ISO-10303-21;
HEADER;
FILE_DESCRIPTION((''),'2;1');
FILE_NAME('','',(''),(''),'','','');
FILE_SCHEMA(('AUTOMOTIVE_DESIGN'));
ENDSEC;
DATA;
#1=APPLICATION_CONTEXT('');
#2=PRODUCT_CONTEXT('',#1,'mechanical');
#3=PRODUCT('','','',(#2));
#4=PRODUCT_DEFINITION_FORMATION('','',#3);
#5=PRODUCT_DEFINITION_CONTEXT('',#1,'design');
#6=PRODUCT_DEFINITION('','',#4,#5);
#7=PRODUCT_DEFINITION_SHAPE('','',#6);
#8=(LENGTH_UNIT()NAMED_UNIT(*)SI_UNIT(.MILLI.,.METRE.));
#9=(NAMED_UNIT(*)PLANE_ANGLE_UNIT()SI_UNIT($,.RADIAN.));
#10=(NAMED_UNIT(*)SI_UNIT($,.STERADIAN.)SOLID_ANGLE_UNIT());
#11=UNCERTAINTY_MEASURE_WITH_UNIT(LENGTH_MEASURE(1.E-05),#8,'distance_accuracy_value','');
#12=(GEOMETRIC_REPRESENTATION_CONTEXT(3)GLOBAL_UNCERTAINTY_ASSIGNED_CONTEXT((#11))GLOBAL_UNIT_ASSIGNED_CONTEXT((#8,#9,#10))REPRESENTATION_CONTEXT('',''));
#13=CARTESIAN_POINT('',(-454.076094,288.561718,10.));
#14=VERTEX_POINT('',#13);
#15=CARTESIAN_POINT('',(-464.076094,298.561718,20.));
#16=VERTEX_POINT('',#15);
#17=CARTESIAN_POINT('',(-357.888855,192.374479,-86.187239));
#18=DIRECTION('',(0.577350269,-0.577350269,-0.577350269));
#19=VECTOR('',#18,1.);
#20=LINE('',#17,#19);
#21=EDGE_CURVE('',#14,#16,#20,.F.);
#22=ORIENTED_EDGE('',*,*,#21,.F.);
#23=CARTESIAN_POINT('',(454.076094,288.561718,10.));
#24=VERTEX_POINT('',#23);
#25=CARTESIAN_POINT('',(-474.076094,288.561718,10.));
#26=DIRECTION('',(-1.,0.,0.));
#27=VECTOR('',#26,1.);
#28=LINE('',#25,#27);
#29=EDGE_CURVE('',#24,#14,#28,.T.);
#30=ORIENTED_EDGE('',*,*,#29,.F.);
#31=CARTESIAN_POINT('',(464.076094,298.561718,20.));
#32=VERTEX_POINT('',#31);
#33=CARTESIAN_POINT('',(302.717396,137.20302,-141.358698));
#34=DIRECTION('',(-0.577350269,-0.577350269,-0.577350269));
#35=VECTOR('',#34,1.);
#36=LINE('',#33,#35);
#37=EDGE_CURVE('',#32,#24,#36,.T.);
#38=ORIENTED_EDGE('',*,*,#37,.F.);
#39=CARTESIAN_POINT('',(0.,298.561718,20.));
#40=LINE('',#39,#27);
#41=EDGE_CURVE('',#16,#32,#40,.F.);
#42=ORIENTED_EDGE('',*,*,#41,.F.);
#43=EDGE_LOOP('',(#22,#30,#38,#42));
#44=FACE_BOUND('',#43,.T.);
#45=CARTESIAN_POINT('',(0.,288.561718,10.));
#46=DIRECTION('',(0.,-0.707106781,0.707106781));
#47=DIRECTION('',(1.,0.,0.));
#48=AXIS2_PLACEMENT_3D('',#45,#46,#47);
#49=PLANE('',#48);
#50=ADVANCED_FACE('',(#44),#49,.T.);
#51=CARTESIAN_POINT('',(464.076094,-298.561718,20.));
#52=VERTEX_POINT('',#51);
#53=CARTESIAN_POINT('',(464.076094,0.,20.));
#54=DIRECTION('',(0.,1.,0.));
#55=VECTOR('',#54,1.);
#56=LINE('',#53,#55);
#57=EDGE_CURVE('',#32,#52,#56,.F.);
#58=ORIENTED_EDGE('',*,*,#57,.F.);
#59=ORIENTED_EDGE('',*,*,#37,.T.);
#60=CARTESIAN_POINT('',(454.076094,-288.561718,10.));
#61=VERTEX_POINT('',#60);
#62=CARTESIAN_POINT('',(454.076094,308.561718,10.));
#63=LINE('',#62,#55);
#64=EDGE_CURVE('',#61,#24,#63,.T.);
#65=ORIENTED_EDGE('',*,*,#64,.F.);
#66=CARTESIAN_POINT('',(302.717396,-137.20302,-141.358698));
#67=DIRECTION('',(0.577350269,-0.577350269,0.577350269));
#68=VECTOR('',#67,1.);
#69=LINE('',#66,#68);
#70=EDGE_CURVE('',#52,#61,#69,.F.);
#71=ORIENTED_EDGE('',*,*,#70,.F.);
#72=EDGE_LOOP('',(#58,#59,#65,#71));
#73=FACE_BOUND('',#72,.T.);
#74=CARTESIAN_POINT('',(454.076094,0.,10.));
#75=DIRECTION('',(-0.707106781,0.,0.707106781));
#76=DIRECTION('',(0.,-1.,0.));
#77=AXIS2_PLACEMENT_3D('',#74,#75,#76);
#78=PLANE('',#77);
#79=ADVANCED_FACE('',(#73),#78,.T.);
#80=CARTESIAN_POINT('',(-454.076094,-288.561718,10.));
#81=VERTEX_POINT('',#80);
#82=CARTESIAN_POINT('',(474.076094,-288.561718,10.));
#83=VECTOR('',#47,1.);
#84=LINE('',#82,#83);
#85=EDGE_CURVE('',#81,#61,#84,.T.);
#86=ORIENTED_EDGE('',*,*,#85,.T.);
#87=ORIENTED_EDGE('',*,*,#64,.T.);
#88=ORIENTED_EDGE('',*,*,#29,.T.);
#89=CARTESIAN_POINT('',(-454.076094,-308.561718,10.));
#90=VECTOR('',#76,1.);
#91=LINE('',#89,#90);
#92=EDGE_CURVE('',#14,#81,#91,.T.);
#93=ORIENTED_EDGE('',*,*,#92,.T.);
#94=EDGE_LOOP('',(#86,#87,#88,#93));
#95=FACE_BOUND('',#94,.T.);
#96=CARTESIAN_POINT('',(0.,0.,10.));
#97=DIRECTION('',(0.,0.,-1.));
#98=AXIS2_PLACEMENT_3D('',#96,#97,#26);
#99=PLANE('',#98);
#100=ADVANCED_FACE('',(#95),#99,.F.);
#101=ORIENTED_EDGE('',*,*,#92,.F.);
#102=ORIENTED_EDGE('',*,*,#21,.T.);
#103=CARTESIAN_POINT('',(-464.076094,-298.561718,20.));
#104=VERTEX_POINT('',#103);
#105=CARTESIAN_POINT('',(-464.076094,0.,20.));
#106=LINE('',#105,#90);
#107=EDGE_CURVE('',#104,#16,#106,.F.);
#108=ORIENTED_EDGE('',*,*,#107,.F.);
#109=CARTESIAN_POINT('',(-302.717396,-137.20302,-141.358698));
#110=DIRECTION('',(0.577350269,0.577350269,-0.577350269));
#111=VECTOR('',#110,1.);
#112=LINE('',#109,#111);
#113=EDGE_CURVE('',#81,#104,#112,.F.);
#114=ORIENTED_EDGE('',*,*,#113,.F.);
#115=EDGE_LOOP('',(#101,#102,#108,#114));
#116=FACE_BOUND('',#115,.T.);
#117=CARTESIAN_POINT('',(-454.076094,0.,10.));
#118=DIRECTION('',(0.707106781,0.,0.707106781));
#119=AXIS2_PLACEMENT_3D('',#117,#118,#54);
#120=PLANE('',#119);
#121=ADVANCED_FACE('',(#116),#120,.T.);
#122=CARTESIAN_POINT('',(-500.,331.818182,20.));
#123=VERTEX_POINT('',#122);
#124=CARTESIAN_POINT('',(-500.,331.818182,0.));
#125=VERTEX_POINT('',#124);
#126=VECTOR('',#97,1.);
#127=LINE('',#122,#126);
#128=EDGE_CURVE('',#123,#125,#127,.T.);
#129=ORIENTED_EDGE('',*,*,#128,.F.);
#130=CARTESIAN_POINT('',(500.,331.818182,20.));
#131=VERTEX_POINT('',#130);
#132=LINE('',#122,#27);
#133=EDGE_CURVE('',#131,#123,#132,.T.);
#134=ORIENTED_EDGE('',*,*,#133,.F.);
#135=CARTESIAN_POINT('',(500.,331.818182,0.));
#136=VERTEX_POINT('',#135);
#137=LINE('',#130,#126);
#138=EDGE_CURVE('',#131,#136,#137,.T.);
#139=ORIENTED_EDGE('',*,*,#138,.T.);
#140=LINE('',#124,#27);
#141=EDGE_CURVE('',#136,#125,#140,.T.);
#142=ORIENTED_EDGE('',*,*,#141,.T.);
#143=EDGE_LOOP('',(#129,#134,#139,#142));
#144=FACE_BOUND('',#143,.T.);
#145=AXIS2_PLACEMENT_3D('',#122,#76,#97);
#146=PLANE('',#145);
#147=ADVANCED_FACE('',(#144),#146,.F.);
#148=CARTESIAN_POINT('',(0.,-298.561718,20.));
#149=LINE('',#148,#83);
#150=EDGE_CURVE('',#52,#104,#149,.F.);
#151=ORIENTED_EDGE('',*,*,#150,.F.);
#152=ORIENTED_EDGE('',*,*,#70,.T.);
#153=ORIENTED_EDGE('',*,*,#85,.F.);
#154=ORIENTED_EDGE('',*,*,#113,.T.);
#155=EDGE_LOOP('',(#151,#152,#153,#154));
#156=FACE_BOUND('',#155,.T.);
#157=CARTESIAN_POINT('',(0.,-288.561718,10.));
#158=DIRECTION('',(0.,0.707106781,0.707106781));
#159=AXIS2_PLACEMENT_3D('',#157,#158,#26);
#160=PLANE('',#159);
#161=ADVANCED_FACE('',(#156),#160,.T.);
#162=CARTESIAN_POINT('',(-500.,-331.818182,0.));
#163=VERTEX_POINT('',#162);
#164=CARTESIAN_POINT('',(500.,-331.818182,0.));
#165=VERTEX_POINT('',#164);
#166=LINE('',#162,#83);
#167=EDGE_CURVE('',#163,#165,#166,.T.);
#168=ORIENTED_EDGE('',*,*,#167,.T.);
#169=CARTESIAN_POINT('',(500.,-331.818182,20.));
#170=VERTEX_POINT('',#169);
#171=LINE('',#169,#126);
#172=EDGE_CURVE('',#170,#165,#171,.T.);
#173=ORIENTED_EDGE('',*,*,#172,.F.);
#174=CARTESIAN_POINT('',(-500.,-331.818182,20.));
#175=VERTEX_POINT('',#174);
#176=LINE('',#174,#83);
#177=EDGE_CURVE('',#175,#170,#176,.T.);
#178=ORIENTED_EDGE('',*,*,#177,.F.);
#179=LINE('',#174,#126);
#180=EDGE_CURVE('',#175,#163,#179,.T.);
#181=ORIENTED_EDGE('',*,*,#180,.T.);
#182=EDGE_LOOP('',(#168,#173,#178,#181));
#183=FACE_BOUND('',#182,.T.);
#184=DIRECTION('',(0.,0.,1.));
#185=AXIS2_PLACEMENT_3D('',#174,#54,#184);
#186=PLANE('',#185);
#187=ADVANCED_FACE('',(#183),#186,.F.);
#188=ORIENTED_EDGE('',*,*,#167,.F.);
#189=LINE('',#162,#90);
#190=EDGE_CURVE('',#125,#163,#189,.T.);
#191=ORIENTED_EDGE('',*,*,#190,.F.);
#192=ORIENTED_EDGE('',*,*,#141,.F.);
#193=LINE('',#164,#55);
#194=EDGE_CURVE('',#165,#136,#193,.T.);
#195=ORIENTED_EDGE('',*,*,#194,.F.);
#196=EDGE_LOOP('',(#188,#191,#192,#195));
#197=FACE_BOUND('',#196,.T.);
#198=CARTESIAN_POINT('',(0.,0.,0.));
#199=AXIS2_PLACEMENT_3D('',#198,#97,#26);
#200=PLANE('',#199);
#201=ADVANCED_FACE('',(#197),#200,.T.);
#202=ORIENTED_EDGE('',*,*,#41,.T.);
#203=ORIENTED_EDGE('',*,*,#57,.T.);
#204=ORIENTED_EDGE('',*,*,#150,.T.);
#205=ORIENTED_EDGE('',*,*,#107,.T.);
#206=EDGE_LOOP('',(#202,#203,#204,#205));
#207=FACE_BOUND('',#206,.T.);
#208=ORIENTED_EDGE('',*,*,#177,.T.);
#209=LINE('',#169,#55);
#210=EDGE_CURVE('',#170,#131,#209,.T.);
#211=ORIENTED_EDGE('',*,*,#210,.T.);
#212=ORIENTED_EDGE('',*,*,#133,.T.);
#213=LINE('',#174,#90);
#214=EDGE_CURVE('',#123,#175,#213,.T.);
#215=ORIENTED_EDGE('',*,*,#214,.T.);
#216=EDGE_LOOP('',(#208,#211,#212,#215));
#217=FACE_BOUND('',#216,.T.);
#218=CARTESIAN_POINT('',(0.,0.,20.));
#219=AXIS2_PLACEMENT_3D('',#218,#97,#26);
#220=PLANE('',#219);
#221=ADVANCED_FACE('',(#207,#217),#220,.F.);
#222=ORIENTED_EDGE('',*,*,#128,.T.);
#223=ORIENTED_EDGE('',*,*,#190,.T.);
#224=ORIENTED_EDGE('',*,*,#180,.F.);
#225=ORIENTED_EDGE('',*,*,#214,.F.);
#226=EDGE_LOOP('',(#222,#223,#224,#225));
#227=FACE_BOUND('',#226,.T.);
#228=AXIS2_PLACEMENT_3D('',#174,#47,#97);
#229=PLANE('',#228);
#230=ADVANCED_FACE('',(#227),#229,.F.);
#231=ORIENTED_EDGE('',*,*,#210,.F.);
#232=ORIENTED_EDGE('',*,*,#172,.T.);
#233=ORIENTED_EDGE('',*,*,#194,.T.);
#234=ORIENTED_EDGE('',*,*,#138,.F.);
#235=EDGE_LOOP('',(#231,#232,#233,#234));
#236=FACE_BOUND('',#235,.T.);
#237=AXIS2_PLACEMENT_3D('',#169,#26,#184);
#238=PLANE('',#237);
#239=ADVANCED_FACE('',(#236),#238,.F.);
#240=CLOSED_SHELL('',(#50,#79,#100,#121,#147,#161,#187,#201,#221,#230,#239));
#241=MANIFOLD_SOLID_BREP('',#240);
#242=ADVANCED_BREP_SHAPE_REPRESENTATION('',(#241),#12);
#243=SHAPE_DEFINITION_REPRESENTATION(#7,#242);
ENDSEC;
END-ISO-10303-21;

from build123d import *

# Parameters (mm, degrees)
SKETCH2_W           = 1000
SKETCH2_H           = 663.636363636
BOSS_EXTRUDE1_DEPTH = 20
SKETCH3_W           = 948.152188742
SKETCH3_H           = 617.123435666
CUT_EXTRUDE1_DEPTH  = 10
CHAMFER1_SIZE       = 20


with BuildPart() as part:
    # Sketch2 → Boss-Extrude1 (new body)
    with BuildSketch(Plane.XY):
        Rectangle(SKETCH2_W, SKETCH2_H)
    extrude(amount=BOSS_EXTRUDE1_DEPTH)

    # Sketch3 → Cut-Extrude1 (cut)
    with BuildSketch(Plane.XY.offset(20)):
        Rectangle(SKETCH3_W, SKETCH3_H)
    extrude(amount=-CUT_EXTRUDE1_DEPTH, mode=Mode.SUBTRACT)

    # Chamfer1
    # the kernel refuses this chamfer: 20 mm, written as the material it adds along each edge
    with BuildSketch(Plane(origin=(-474.076094371, -308.561717833, 10), x_dir=(0, -0.0274958766105877, 0.9996219169112968), z_dir=(1, 0, 0))) as chamfer1_piece_1_section:
        Polygon((CHAMFER1_SIZE * 0.999621916911, -CHAMFER1_SIZE * 0.0274958766106), (-CHAMFER1_SIZE * 0.0274958766106, -CHAMFER1_SIZE * 0.999621916911), (0, 0), align=None)
    chamfer1_piece_1 = extrude(amount=948.152188741, mode=Mode.PRIVATE)
    chamfer1_piece_1 = split(chamfer1_piece_1, bisect_by=Plane(origin=(0, -300.783940055, 20), z_dir=(0, 0, -1)), keep=Keep.TOP, mode=Mode.PRIVATE)
    add(chamfer1_piece_1)
    with BuildSketch(Plane(origin=(-474.076094371, 308.561717833, 10), x_dir=(-0.0274958766105877, 0, 0.9996219169112968), z_dir=(0, -1, 0))) as chamfer1_piece_2_section:
        Polygon((CHAMFER1_SIZE * 0.999621916911, -CHAMFER1_SIZE * 0.0274958766106), (-CHAMFER1_SIZE * 0.0274958766106, -CHAMFER1_SIZE * 0.999621916911), (0, 0), align=None)
    chamfer1_piece_2 = extrude(amount=617.123435666, mode=Mode.PRIVATE)
    chamfer1_piece_2 = split(chamfer1_piece_2, bisect_by=Plane(origin=(-466.298316593, 0, 20), z_dir=(0, 0, -1)), keep=Keep.TOP, mode=Mode.PRIVATE)
    add(chamfer1_piece_2)
    with BuildSketch(Plane(origin=(474.076094371, 308.561717833, 10), x_dir=(0, 0.0274958766105877, 0.9996219169112968), z_dir=(-1, 0, 0))) as chamfer1_piece_3_section:
        Polygon((CHAMFER1_SIZE * 0.999621916911, -CHAMFER1_SIZE * 0.0274958766106), (-CHAMFER1_SIZE * 0.0274958766106, -CHAMFER1_SIZE * 0.999621916911), (0, 0), align=None)
    chamfer1_piece_3 = extrude(amount=948.152188741, mode=Mode.PRIVATE)
    chamfer1_piece_3 = split(chamfer1_piece_3, bisect_by=Plane(origin=(0, 300.783940055, 20), z_dir=(0, 0, -1)), keep=Keep.TOP, mode=Mode.PRIVATE)
    add(chamfer1_piece_3)
    with BuildSketch(Plane(origin=(474.076094371, -308.561717833, 10), x_dir=(0.0274958766105877, 0, 0.9996219169112968), z_dir=(0, 1, 0))) as chamfer1_piece_4_section:
        Polygon((CHAMFER1_SIZE * 0.999621916911, -CHAMFER1_SIZE * 0.0274958766106), (-CHAMFER1_SIZE * 0.0274958766106, -CHAMFER1_SIZE * 0.999621916911), (0, 0), align=None)
    chamfer1_piece_4 = extrude(amount=617.123435666, mode=Mode.PRIVATE)
    chamfer1_piece_4 = split(chamfer1_piece_4, bisect_by=Plane(origin=(466.298316593, 0, 20), z_dir=(0, 0, -1)), keep=Keep.TOP, mode=Mode.PRIVATE)
    add(chamfer1_piece_4)


solid = part.part
